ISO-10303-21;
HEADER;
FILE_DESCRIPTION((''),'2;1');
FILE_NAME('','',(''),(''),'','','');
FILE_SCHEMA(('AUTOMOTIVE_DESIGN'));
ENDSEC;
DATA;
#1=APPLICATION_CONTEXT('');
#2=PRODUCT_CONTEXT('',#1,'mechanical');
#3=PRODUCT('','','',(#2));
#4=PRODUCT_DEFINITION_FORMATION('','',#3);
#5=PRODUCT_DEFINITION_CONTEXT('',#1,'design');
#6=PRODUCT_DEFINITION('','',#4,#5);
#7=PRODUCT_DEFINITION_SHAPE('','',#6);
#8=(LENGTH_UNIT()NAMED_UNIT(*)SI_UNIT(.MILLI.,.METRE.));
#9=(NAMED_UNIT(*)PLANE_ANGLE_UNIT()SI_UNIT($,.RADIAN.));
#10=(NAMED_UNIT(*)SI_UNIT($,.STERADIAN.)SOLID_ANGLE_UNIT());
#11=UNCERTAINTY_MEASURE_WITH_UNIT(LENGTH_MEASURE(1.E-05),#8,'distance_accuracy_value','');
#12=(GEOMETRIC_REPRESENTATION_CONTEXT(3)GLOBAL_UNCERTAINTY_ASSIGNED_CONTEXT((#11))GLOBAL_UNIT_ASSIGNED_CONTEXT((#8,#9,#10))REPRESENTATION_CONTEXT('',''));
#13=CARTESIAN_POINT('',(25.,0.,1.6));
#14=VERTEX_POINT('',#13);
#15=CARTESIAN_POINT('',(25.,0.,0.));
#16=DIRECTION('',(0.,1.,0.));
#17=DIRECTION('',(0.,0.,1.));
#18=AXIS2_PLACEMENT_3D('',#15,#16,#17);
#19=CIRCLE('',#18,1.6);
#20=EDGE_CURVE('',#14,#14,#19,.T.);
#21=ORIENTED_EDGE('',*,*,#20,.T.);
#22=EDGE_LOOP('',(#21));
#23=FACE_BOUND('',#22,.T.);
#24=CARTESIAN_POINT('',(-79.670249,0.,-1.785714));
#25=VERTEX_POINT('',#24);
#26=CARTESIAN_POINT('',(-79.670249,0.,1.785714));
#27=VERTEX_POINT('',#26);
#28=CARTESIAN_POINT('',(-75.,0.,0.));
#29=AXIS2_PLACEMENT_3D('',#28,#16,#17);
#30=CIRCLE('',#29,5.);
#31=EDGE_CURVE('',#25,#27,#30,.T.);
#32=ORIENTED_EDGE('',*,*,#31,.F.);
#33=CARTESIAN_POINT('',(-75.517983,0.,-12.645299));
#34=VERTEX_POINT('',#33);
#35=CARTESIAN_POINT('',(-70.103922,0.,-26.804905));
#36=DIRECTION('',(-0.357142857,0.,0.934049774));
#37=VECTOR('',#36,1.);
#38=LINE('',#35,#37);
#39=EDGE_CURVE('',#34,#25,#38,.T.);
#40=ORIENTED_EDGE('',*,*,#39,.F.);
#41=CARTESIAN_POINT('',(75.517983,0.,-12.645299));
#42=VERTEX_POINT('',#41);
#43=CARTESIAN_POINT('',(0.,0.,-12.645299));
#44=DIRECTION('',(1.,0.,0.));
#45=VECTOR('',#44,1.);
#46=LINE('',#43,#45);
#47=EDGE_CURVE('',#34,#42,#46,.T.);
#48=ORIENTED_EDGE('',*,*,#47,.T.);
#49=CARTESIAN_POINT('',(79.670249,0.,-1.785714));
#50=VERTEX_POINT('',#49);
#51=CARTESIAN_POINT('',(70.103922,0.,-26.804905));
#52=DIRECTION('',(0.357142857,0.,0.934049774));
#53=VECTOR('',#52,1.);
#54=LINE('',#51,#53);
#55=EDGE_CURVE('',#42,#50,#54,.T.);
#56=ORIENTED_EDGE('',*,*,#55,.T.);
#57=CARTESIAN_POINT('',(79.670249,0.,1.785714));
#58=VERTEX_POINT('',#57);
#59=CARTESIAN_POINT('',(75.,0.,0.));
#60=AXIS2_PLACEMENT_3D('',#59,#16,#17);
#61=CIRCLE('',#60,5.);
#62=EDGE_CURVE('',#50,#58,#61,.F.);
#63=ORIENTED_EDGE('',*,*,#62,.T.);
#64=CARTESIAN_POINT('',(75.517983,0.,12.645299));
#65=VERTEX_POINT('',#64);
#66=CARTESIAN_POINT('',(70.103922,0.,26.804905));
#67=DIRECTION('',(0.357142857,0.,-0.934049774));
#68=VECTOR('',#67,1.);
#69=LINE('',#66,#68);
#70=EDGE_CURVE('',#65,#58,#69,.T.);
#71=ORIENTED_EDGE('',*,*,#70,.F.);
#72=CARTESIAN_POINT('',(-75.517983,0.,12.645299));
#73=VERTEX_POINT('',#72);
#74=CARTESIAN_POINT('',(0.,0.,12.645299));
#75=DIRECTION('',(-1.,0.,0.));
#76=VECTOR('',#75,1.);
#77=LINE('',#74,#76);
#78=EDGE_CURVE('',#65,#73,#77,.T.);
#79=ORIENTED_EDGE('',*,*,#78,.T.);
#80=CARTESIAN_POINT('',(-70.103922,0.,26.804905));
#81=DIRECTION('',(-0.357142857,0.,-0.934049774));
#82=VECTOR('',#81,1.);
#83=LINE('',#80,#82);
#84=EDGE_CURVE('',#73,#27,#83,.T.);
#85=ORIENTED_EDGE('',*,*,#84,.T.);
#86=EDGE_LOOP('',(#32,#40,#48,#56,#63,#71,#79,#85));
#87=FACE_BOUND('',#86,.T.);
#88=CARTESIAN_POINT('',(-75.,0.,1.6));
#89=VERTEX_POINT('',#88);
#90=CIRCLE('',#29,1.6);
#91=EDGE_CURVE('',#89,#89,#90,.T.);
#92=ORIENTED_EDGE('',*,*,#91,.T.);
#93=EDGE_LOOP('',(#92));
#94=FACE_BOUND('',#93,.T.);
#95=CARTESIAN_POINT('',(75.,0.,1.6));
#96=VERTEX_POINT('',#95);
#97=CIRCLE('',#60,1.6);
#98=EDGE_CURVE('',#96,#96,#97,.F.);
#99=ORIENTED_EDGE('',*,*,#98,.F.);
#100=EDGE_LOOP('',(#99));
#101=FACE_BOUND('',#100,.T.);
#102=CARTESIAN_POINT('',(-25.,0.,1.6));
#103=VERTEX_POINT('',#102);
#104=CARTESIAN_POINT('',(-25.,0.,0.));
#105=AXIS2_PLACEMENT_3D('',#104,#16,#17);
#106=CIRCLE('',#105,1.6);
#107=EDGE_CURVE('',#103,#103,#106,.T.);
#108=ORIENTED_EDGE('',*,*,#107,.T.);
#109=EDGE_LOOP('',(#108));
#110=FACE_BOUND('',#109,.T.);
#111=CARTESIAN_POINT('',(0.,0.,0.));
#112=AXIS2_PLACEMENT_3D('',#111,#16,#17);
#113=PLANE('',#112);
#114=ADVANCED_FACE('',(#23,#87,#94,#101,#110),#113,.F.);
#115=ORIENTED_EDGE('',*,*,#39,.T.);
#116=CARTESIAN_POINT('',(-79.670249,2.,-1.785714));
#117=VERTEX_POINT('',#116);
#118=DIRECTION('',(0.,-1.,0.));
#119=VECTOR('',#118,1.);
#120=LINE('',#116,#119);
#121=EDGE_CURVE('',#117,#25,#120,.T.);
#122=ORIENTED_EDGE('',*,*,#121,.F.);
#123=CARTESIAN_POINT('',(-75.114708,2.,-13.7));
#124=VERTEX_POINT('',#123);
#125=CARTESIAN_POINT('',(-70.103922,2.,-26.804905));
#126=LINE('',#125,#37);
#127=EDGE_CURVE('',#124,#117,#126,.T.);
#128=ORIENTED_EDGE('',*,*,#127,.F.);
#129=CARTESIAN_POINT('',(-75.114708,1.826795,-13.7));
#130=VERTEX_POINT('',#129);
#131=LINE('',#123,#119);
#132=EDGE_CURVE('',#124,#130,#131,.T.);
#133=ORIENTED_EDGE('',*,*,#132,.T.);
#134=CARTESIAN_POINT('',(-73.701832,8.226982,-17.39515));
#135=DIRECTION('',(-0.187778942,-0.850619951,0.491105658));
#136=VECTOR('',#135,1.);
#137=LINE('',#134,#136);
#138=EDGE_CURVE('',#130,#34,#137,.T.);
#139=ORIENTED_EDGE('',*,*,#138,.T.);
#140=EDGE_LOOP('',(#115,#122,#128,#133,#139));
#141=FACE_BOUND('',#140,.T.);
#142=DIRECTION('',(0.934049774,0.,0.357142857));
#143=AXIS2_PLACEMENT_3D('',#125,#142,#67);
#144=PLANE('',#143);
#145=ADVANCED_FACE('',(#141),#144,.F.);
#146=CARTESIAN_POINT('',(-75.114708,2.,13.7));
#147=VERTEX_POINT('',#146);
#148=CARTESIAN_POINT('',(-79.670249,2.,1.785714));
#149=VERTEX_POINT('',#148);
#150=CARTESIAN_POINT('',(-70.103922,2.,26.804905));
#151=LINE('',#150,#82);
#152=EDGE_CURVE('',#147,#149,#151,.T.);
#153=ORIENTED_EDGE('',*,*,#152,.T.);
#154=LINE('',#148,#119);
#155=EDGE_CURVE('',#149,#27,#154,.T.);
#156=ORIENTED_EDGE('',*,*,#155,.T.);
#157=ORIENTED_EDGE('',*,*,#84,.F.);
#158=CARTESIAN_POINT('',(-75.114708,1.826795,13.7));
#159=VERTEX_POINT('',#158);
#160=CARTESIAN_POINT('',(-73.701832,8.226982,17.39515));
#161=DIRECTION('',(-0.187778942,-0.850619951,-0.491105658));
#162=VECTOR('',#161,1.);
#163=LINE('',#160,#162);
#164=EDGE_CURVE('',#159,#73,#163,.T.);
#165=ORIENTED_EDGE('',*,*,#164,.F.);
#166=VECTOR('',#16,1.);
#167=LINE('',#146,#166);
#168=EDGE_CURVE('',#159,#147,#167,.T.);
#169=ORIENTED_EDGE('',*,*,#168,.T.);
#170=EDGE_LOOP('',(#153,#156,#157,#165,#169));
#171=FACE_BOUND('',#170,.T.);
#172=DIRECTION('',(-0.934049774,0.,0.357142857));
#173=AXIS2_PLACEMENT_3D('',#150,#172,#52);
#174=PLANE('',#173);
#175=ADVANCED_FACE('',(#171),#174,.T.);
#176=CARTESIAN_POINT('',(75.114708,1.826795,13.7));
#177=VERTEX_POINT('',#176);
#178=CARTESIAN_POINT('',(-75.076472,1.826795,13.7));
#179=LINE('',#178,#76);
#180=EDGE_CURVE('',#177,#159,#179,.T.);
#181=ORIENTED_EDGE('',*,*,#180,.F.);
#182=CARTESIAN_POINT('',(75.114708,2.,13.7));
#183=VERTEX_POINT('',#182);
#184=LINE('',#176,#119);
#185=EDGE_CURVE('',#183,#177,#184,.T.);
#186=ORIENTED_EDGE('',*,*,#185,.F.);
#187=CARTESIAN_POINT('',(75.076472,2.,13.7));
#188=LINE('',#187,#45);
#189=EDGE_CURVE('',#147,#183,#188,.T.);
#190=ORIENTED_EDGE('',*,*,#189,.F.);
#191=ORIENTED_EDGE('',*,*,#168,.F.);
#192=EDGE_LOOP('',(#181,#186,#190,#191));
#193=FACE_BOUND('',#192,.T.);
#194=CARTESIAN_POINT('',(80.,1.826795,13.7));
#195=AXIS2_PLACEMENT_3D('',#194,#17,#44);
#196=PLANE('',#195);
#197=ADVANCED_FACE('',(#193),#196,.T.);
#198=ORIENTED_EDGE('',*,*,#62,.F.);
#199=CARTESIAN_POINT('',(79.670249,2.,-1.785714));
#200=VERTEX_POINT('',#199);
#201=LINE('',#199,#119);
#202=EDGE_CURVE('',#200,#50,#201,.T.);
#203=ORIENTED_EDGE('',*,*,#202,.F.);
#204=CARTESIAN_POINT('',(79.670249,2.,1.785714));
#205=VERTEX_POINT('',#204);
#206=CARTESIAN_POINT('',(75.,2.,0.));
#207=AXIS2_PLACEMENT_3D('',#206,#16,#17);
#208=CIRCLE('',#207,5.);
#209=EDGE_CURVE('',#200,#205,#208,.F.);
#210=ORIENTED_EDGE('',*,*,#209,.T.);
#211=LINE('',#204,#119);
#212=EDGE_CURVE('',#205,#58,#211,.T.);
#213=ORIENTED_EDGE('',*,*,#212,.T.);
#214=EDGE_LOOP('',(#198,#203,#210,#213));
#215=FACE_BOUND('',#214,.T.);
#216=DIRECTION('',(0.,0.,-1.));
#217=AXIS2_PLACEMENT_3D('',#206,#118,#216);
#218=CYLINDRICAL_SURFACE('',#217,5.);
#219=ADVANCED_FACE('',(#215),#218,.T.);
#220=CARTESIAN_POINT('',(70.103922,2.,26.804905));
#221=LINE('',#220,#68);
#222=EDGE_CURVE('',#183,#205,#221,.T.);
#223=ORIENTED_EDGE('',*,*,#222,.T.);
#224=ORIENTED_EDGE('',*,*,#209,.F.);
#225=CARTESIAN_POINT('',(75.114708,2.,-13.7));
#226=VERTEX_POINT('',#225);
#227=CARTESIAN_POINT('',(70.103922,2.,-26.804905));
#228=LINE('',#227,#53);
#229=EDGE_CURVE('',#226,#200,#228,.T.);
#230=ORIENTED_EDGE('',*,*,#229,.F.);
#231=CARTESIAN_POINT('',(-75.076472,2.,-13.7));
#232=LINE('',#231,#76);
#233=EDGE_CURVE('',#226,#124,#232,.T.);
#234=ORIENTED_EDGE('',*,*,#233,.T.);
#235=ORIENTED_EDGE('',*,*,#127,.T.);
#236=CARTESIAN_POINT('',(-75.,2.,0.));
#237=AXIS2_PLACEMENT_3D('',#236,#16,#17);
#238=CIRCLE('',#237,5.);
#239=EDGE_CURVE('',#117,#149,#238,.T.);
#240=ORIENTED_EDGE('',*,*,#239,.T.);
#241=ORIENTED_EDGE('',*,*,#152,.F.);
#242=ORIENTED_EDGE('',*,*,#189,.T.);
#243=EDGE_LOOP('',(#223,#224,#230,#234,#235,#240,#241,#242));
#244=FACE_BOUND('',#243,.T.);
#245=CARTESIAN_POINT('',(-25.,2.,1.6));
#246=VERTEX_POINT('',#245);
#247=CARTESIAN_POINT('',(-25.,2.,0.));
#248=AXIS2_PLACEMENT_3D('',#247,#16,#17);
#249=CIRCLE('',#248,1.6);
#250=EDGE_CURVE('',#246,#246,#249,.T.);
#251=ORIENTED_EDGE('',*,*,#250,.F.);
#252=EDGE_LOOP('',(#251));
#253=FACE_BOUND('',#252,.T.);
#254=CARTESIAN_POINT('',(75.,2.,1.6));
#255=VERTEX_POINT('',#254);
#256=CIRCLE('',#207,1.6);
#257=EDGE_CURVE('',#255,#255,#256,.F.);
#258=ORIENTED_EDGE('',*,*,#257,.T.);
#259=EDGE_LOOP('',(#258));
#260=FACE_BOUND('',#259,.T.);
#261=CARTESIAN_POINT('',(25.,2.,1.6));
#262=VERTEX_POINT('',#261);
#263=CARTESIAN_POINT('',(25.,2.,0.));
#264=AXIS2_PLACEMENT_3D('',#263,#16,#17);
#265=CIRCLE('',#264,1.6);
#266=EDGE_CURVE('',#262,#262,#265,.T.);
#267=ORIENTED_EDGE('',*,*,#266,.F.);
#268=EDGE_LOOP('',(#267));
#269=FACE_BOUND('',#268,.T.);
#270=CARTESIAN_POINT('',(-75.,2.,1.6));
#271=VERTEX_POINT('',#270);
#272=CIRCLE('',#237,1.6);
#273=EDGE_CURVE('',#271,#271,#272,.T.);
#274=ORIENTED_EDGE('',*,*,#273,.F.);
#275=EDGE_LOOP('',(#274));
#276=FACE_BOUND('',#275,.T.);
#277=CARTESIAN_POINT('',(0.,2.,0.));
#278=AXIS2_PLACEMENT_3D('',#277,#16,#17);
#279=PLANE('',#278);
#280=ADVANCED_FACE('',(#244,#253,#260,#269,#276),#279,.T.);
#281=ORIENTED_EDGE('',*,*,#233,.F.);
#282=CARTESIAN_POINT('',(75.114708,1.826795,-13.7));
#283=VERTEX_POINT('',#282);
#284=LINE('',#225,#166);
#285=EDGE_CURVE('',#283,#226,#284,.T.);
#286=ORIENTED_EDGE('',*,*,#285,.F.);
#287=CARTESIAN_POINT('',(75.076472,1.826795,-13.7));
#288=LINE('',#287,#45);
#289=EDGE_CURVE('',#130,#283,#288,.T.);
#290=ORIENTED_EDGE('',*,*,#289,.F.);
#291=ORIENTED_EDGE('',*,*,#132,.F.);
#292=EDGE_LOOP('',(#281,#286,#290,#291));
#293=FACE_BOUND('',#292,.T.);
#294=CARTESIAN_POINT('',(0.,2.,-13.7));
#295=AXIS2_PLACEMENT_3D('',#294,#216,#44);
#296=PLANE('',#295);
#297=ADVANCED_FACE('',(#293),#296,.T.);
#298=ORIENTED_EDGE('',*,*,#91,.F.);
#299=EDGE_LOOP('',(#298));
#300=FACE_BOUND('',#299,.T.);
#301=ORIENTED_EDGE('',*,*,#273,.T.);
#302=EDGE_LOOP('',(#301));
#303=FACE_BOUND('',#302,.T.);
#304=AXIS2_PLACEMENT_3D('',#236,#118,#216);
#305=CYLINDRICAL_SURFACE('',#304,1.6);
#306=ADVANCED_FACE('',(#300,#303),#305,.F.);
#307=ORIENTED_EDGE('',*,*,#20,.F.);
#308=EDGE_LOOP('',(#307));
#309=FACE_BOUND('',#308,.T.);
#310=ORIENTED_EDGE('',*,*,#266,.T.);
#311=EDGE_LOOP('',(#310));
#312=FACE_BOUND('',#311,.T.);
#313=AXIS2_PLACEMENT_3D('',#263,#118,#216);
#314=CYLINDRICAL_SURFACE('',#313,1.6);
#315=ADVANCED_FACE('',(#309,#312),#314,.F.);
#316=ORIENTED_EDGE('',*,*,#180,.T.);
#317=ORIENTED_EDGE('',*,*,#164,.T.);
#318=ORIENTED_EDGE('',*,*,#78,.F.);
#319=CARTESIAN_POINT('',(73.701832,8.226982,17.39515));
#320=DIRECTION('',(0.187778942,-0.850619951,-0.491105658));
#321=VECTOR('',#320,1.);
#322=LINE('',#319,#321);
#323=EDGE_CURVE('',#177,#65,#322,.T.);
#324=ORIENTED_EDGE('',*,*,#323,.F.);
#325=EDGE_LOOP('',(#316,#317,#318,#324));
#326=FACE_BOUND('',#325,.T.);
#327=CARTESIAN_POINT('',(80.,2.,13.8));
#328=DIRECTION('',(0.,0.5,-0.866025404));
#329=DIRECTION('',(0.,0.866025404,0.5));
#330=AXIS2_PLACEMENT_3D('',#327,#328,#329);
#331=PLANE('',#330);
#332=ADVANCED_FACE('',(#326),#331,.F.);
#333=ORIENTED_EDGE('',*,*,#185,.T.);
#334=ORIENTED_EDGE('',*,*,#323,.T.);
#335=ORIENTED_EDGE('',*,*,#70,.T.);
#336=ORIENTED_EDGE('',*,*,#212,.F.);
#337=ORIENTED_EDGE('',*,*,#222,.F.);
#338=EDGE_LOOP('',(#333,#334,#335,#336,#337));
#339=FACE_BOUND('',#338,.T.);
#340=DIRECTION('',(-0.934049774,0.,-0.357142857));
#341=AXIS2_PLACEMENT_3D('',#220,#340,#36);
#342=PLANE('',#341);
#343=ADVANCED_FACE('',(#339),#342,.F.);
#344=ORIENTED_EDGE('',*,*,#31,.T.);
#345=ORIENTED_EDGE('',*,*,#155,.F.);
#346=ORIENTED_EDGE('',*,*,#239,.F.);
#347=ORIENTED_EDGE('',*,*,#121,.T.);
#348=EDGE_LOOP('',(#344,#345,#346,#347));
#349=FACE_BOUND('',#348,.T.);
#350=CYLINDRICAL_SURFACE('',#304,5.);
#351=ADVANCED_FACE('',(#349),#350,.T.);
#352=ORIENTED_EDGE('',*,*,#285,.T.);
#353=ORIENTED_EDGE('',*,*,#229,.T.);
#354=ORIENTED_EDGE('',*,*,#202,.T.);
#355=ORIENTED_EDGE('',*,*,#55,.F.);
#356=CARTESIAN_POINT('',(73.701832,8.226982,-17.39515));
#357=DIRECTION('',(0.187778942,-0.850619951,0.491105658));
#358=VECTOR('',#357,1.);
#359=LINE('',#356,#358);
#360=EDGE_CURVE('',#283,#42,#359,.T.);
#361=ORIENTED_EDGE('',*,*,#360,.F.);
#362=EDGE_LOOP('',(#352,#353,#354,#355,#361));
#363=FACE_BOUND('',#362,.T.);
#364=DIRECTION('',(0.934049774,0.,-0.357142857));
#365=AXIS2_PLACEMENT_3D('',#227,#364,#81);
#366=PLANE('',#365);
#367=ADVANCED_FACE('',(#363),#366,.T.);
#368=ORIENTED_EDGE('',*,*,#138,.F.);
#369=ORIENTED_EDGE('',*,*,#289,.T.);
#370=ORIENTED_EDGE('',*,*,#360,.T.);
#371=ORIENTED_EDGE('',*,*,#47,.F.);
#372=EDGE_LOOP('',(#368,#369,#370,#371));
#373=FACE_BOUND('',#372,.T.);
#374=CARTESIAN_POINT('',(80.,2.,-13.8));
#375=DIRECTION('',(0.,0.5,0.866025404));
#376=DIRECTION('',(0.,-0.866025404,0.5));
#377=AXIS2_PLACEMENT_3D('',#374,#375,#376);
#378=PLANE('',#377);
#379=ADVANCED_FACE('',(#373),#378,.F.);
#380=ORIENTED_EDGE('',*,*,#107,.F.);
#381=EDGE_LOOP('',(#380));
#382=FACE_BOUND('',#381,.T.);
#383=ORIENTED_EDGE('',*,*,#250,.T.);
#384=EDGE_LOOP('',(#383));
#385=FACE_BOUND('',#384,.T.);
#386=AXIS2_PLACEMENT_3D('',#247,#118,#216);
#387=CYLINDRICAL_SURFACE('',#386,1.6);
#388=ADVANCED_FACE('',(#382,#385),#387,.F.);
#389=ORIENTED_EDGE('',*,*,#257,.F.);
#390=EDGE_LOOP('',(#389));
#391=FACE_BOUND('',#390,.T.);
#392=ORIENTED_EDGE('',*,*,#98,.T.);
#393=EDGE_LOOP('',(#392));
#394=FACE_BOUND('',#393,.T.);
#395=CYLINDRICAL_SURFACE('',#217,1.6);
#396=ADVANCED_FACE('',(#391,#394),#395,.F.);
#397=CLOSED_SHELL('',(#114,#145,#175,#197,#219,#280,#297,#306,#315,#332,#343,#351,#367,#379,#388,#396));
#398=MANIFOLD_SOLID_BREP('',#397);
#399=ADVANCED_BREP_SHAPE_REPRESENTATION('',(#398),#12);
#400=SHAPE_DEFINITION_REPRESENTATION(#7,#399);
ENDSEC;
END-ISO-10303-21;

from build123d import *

# Parameters (mm, degrees)
SKETCH_1_R          = 1.6
EXTRUDE_1_DEPTH     = 2
CUT_EXTRUDE_1_DEPTH = 161.623784042
CHAMFER_1_SIZE      = 0.2
CHAMFER_1_SIZE2     = 0.1
CHAMFER_2_SIZE2     = 0.2
CHAMFER_2_SIZE      = 0.1


with BuildPart() as part:
    # Эскиз1 → Бобышка-Вытянуть1 (new body)
    # profile 1 of 3: a face of its own
    with BuildSketch(Plane(origin=(0, 0, 0), x_dir=(1, 0, 0), z_dir=(0, 1, 0))):
        with BuildLine():
            Line((75, 14), (-75, 14))
            Line((-75, 14), (-75, 1.6))
            ThreePointArc((-75, 1.6), (-73.86862915, 1.13137085), (-73.4, 0))
            ThreePointArc((-73.4, 0), (-73.86862915, -1.13137085), (-75, -1.6))
            Line((-75, -1.6), (-75, -14))
            Line((-75, -14), (75, -14))
            Line((75, -14), (75, -1.6))
            ThreePointArc((75, -1.6), (73.4, 0), (75, 1.6))
            Line((75, 1.6), (75, 14))
        make_face()
        with Locations(Location((-25, 0, 0), (0, 0, 270))):
            Circle(SKETCH_1_R, mode=Mode.SUBTRACT)
        with Locations(Location((25, 0, 0), (0, 0, 270))):
            Circle(SKETCH_1_R, mode=Mode.SUBTRACT)
    # profile 2 of 3: a face of its own
    with BuildSketch(Plane(origin=(0, 0, 0), x_dir=(1, 0, 0), z_dir=(0, 1, 0))):
        with BuildLine():
            Line((79.670248868, 1.785714286), (75, 14))
            Line((75, 14), (75, 1.6))
            ThreePointArc((75, 1.6), (76.13137085, 1.13137085), (76.6, 0))
            ThreePointArc((76.6, 0), (76.13137085, -1.13137085), (75, -1.6))
            Line((75, -1.6), (75, -14))
            Line((75, -14), (79.670248868, -1.785714286))
            ThreePointArc((79.670248868, -1.785714286), (80, 0), (79.670248868, 1.785714286))
        make_face()
    # profile 3 of 3: a face of its own
    with BuildSketch(Plane(origin=(0, 0, 0), x_dir=(1, 0, 0), z_dir=(0, 1, 0))):
        with BuildLine():
            Line((-75, 1.6), (-75, 14))
            Line((-75, 14), (-79.670248868, 1.785714286))
            ThreePointArc((-79.670248868, 1.785714286), (-80, 0), (-79.670248868, -1.785714286))
            Line((-79.670248868, -1.785714286), (-75, -14))
            Line((-75, -14), (-75, -1.6))
            ThreePointArc((-75, -1.6), (-76.6, 0), (-75, 1.6))
        make_face()
    extrude(amount=EXTRUDE_1_DEPTH)

    # Эскиз3 → Вырез-Вытянуть1 (cut, through all)
    with BuildSketch(Plane.ZY.offset(80)):
        Polygon((-12.645299462, 0), (-14, 0), (-14, 2), (-13.8, 2), align=None)
        Polygon((14, 0), (14, 2), (13.8, 2), (12.645299462, 0), align=None)
    extrude(amount=-CUT_EXTRUDE_1_DEPTH, mode=Mode.SUBTRACT)

    # Фаска1
    chamfer_1_edges = [part.edges().sort_by_distance(p)[0] for p in [
        (0, 2, -13.8),
    ]]
    chamfer_1_side = [part.faces().sort_by_distance(p)[0] for p in [
        (0, 0.999022738, -13.222085508),
    ]]
    chamfer(chamfer_1_edges, length=CHAMFER_1_SIZE, length2=CHAMFER_1_SIZE2, reference=chamfer_1_side[0])

    # Фаска2
    chamfer_2_edges = [part.edges().sort_by_distance(p)[0] for p in [
        (0, 2, 13.8),
    ]]
    chamfer_2_side = [part.faces().sort_by_distance(p)[0] for p in [
        (0, 2, 13.798),
    ]]
    chamfer(chamfer_2_edges, length=CHAMFER_2_SIZE - 0.0001, length2=CHAMFER_2_SIZE2 - 0.0001, reference=chamfer_2_side[0])  # a hair under: the kernel refuses the full size


solid = part.part
